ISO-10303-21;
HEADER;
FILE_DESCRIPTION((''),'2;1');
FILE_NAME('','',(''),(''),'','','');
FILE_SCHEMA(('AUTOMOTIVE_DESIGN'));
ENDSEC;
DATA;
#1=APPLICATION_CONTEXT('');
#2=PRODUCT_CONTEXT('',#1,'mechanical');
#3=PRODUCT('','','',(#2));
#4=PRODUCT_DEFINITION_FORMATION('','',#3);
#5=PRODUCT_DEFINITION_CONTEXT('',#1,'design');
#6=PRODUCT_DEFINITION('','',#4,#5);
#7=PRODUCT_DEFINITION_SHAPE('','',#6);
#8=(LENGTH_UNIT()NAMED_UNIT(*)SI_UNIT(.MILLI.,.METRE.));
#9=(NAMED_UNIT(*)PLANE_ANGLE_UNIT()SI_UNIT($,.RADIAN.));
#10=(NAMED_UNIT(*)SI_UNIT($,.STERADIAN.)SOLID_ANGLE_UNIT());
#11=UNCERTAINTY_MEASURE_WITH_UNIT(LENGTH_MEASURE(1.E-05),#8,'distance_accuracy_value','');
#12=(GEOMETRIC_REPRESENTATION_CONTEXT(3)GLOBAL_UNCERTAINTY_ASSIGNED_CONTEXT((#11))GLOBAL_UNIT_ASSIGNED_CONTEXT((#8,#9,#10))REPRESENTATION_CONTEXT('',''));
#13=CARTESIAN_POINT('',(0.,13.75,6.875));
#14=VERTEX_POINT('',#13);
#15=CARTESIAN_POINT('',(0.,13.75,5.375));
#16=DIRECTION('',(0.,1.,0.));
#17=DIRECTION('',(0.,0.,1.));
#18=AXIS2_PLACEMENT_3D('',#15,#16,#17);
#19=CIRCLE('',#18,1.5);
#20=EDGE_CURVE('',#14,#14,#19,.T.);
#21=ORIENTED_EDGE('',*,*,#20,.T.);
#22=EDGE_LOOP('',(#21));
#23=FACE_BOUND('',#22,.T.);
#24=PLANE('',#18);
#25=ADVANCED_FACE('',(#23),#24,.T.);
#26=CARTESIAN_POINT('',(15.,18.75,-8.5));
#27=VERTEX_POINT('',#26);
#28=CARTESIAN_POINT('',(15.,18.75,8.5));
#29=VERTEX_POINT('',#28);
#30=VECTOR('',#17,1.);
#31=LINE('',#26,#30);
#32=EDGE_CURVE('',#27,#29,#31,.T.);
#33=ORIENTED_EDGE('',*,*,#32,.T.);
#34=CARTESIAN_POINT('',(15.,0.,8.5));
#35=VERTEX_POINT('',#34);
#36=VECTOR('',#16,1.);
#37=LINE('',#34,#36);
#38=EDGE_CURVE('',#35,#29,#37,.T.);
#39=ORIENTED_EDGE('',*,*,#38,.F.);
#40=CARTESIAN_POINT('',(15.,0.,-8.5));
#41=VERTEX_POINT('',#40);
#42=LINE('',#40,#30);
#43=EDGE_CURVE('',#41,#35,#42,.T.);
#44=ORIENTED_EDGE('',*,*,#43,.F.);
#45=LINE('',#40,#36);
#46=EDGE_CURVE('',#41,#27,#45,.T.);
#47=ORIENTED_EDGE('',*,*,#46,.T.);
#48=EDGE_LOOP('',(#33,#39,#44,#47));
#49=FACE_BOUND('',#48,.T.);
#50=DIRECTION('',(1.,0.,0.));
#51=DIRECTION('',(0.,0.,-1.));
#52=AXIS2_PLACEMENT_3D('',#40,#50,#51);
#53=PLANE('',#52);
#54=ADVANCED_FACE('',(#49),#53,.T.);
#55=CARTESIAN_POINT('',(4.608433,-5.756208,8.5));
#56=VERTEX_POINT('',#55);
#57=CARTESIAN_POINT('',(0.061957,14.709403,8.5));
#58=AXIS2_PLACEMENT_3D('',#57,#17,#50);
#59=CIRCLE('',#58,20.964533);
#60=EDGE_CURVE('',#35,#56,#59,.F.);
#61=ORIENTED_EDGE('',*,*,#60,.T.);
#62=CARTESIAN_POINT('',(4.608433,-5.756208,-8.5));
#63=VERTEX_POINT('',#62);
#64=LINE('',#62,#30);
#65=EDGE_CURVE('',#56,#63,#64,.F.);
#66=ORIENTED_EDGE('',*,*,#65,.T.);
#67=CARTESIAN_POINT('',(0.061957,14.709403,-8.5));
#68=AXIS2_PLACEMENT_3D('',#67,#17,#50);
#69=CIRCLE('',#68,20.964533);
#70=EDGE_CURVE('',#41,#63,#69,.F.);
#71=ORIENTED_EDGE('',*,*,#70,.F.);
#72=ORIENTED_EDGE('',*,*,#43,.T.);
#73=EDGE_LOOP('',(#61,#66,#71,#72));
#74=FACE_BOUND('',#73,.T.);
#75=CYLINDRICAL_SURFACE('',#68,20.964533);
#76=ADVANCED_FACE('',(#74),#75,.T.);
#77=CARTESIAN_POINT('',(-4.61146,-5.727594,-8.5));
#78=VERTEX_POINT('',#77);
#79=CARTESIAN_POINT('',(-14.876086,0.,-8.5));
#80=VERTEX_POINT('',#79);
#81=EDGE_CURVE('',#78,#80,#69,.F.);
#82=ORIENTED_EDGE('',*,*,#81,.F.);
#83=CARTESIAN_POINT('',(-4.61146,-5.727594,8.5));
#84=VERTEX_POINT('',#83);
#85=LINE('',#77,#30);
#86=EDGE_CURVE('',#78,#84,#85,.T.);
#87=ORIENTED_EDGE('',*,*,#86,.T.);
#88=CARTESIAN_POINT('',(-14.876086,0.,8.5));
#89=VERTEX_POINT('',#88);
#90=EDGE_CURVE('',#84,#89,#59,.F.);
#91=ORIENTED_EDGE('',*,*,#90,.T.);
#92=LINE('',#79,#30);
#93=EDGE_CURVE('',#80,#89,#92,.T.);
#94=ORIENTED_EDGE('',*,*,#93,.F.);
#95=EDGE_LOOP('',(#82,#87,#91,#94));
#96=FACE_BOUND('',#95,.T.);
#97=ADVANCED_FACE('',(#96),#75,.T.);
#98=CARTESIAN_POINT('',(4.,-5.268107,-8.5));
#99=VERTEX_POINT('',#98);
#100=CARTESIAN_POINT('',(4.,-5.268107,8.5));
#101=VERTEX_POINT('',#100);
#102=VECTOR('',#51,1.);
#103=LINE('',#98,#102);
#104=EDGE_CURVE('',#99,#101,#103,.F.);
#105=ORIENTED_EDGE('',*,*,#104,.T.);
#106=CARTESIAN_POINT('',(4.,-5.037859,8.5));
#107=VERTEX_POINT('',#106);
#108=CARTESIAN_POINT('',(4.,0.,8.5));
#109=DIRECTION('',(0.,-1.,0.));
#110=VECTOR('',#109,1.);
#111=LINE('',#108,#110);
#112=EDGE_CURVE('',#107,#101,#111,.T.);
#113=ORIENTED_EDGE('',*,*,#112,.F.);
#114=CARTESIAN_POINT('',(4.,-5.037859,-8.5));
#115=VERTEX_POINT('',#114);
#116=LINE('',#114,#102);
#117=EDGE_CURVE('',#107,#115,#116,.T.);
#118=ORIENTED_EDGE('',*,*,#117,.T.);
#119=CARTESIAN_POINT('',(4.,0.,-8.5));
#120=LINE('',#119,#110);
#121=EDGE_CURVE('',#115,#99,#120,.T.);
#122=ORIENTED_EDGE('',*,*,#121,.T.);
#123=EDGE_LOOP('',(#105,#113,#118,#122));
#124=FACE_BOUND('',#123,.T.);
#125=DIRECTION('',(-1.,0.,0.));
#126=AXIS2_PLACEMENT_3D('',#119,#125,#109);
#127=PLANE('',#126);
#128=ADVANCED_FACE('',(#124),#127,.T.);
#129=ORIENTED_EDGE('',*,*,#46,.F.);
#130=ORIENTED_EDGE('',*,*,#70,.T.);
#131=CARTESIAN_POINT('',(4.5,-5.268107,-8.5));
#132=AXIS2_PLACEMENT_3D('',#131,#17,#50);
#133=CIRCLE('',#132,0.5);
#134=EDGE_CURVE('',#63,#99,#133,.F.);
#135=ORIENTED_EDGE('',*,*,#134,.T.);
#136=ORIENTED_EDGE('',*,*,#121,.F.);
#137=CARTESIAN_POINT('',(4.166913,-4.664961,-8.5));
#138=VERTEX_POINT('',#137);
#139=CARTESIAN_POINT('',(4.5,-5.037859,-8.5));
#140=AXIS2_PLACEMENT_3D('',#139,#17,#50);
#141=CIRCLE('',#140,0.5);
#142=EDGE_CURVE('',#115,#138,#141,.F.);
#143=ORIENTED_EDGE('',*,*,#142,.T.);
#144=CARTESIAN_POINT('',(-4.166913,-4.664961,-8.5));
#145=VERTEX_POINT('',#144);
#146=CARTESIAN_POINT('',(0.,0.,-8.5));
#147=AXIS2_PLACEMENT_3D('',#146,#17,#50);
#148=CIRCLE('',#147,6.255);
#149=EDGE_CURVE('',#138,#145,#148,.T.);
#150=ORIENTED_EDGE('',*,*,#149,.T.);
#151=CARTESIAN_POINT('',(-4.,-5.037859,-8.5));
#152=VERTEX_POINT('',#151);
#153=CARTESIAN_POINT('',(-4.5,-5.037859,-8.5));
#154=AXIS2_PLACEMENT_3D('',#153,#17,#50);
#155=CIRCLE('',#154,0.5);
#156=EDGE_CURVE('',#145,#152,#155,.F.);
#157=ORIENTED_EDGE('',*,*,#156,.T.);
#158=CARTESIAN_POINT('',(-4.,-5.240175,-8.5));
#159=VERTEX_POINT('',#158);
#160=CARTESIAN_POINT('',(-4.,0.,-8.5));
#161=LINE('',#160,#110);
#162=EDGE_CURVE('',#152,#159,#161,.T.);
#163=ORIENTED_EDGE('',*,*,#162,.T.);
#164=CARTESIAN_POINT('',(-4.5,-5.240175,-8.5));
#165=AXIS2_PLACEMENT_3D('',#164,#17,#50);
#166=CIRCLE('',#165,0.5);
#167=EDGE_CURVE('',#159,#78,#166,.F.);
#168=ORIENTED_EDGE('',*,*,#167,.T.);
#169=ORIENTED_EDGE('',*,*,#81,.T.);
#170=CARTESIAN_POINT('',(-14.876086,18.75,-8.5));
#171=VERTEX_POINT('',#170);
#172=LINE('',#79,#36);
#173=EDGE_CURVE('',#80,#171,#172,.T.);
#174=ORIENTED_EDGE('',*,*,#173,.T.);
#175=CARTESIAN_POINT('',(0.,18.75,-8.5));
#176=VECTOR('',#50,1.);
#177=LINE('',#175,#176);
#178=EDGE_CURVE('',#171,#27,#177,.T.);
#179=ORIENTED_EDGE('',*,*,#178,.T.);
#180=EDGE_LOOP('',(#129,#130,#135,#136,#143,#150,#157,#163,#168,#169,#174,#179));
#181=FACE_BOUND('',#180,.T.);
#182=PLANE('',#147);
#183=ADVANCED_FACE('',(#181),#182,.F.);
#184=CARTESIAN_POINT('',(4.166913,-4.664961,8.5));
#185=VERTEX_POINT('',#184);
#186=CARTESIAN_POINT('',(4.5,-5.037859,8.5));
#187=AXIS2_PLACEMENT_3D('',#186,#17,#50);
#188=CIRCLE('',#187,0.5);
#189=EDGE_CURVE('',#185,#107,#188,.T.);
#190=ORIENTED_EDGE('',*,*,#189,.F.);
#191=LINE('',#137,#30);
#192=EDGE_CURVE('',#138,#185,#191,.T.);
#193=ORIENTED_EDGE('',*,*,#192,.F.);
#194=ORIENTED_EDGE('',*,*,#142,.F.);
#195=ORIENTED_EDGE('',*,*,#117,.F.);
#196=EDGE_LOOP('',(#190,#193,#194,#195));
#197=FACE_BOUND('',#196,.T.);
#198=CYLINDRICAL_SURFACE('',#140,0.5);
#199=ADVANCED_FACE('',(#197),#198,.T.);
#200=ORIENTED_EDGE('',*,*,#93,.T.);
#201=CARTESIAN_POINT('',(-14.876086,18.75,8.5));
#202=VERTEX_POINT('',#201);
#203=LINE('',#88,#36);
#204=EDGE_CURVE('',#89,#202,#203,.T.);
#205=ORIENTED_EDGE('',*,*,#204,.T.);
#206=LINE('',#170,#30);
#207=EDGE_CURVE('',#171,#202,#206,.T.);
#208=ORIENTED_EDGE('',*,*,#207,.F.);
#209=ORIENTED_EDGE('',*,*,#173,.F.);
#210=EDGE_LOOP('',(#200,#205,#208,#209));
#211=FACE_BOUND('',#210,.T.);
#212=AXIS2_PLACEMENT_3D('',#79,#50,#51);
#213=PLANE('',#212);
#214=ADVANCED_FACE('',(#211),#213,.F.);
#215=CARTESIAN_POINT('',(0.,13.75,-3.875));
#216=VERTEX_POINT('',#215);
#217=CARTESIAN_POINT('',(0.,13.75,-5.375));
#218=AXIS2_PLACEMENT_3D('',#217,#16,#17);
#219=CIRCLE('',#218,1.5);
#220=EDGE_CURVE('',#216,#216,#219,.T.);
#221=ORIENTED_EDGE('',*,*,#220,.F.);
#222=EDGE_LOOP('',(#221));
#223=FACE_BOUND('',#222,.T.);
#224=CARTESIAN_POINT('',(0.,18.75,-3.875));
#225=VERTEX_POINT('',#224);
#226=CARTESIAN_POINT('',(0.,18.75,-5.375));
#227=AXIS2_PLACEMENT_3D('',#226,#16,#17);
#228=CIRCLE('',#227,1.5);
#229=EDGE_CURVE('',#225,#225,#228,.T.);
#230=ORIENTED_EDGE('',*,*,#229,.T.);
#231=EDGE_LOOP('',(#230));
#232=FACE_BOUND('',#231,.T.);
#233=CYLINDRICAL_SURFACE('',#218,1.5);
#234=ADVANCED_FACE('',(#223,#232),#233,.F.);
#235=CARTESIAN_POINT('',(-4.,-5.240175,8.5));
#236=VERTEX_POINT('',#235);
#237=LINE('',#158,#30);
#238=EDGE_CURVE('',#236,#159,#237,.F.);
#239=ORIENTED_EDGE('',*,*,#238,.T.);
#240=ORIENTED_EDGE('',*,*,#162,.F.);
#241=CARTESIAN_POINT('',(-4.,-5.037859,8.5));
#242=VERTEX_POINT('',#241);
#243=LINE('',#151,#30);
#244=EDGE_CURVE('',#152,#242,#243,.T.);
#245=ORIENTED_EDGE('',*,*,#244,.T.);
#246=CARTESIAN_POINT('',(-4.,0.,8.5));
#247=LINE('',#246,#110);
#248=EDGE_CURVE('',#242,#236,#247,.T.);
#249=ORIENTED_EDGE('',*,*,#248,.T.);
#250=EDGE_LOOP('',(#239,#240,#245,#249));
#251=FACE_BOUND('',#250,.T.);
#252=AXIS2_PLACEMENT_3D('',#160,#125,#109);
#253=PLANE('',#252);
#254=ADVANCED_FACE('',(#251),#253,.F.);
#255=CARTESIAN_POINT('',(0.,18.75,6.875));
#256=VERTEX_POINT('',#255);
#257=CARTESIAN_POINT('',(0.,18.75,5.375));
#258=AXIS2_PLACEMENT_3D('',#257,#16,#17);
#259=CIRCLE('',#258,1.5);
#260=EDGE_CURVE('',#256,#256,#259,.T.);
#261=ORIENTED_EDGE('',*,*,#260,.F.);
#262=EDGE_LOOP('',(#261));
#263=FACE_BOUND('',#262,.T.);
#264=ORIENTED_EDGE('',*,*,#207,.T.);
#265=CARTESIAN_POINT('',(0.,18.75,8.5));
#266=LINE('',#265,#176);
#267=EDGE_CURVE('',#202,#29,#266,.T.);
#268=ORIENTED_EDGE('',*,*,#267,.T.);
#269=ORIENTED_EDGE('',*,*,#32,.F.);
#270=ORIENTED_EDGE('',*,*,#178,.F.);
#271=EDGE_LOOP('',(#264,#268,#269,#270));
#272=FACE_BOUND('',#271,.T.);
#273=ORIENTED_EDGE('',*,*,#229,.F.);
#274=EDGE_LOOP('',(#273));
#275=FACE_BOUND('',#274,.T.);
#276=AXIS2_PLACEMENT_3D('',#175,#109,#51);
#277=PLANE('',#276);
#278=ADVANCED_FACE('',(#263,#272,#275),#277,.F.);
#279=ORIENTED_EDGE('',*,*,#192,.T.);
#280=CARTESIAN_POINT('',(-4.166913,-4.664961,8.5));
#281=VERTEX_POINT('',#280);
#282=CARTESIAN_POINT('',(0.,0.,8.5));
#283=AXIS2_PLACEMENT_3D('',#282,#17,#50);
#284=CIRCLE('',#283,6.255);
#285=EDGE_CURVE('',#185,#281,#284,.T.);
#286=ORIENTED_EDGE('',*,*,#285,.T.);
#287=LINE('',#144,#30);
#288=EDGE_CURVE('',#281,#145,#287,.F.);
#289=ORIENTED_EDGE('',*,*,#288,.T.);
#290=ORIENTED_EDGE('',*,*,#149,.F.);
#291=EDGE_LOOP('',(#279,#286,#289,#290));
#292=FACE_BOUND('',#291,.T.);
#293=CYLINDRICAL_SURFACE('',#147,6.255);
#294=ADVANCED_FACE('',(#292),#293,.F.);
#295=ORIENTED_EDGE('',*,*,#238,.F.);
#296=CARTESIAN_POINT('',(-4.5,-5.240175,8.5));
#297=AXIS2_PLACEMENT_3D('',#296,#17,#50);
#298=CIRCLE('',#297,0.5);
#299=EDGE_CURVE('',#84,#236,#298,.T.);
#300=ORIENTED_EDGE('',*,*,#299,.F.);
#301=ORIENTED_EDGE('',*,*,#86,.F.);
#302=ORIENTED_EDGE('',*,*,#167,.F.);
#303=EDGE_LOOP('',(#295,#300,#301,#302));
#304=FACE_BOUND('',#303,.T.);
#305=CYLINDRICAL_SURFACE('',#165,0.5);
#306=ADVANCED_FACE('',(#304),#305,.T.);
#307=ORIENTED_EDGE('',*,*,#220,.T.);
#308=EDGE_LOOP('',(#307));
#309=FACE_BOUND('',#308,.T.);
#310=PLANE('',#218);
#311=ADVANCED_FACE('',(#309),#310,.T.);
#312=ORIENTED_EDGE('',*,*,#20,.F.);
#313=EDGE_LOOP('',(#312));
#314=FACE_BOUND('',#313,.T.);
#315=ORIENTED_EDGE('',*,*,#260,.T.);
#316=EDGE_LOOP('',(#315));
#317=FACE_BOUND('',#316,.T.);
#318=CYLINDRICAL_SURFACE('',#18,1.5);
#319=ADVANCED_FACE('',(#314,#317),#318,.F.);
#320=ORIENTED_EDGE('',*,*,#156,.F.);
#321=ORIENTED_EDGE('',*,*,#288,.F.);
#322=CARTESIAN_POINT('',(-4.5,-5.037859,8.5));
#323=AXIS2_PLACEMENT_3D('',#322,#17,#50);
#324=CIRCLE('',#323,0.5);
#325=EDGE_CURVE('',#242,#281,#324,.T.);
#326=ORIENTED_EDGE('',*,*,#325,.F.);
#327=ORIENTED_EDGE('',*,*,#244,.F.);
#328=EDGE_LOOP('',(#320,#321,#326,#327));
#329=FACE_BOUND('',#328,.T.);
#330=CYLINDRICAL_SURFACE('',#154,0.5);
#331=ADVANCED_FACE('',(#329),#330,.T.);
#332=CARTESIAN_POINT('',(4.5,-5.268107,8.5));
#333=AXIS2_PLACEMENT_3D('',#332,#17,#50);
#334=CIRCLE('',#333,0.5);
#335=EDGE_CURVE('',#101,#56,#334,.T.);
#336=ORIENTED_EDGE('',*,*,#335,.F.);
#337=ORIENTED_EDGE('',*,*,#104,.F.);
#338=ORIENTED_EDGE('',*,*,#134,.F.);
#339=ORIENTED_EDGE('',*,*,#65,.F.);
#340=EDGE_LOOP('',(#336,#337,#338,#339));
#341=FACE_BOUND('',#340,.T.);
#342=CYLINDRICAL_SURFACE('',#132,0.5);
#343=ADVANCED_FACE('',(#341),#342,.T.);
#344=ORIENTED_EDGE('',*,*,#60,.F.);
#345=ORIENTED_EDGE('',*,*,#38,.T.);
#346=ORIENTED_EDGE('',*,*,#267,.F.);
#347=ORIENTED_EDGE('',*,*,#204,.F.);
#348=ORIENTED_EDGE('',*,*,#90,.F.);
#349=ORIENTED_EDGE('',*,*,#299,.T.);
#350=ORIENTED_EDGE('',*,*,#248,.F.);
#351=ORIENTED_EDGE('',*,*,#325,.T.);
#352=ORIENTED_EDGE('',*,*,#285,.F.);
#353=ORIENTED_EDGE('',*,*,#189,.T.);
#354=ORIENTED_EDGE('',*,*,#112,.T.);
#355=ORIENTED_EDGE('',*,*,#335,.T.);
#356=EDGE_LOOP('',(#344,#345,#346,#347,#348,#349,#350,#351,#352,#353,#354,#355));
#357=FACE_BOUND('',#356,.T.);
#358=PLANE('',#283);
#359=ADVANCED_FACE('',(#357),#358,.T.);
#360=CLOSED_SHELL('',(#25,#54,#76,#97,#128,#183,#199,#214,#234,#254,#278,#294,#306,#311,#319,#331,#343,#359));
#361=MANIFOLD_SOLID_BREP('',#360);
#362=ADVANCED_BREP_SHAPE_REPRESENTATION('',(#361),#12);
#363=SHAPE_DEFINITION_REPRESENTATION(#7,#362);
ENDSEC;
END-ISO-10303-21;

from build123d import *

# Parameters (mm, degrees)
BOSS_EXTRUDE1_START = -8.5
BOSS_EXTRUDE1_DEPTH = 17
CUT_EXTRUDE2_DEPTH  = 30.420443572
FILLET1_R           = 0.5
FILLET2_R           = 0.5
FILLET3_R           = 0.5
FILLET4_R           = 0.5
SKETCH3_R           = 1.5
CUT_EXTRUDE3_DEPTH  = 5


# Read off the part's stored shape, not the designer's step: Boss-Extrude1
with BuildPart() as part:
    # Boss-Extrude1 outline → Boss-Extrude1 (new body)
    with BuildSketch(Plane.XY.offset(BOSS_EXTRUDE1_START)):
        with BuildLine():
            ThreePointArc((-0.026346322, -6.254944514), (0.013173118, 6.254986128), (0, -6.255))
            ThreePointArc((0, -6.255), (8.130777353, -4.640165574), (15, 0))
            Line((15, 0), (15, 18.75))
            Line((15, 18.75), (-14.876085662, 18.75))
            Line((-14.876085662, 18.75), (-14.876085662, 0))
            ThreePointArc((-14.876085662, 0), (-8.076154016, -4.611125189), (-0.026346322, -6.254944514))
        make_face()
    extrude(amount=BOSS_EXTRUDE1_DEPTH)

    # Sketch2 → Cut-Extrude2 (cut, through all)
    with BuildSketch(Plane.XY.offset(8.5)):
        Polygon((4, 0), (0, 0), (-4, 0), (-4, -9.216790773), (4, -9.216790773), align=None)
    extrude(amount=-CUT_EXTRUDE2_DEPTH, mode=Mode.SUBTRACT)

    # Fillet1
    fillet1_edges = [part.edges().sort_by_distance(p)[0] for p in [
        (4, -4.808848585, 0),
    ]]
    fillet(fillet1_edges, radius=FILLET1_R)

    # Fillet2
    fillet2_edges = [part.edges().sort_by_distance(p)[0] for p in [
        (4, -5.881926017, 0),
    ]]
    fillet(fillet2_edges, radius=FILLET2_R)

    # Fillet3
    fillet3_edges = [part.edges().sort_by_distance(p)[0] for p in [
        (-4, -4.808848645, 0),
    ]]
    fillet(fillet3_edges, radius=FILLET3_R)

    # Fillet4
    fillet4_edges = [part.edges().sort_by_distance(p)[0] for p in [
        (-4, -5.857856611, 0),
    ]]
    fillet(fillet4_edges, radius=FILLET4_R)

    # Sketch3 → Cut-Extrude3 (cut)
    with BuildSketch(Plane(origin=(0, 18.75, 0), x_dir=(1, 0, 0), z_dir=(0, 1, 0))):
        with Locations(Location((0, -5.375, 0), (0, 0, 270))):
            Circle(SKETCH3_R)
        with Locations(Location((0, 5.375, 0), (0, 0, 270))):
            Circle(SKETCH3_R)
    extrude(amount=-CUT_EXTRUDE3_DEPTH, mode=Mode.SUBTRACT)


solid = part.part
